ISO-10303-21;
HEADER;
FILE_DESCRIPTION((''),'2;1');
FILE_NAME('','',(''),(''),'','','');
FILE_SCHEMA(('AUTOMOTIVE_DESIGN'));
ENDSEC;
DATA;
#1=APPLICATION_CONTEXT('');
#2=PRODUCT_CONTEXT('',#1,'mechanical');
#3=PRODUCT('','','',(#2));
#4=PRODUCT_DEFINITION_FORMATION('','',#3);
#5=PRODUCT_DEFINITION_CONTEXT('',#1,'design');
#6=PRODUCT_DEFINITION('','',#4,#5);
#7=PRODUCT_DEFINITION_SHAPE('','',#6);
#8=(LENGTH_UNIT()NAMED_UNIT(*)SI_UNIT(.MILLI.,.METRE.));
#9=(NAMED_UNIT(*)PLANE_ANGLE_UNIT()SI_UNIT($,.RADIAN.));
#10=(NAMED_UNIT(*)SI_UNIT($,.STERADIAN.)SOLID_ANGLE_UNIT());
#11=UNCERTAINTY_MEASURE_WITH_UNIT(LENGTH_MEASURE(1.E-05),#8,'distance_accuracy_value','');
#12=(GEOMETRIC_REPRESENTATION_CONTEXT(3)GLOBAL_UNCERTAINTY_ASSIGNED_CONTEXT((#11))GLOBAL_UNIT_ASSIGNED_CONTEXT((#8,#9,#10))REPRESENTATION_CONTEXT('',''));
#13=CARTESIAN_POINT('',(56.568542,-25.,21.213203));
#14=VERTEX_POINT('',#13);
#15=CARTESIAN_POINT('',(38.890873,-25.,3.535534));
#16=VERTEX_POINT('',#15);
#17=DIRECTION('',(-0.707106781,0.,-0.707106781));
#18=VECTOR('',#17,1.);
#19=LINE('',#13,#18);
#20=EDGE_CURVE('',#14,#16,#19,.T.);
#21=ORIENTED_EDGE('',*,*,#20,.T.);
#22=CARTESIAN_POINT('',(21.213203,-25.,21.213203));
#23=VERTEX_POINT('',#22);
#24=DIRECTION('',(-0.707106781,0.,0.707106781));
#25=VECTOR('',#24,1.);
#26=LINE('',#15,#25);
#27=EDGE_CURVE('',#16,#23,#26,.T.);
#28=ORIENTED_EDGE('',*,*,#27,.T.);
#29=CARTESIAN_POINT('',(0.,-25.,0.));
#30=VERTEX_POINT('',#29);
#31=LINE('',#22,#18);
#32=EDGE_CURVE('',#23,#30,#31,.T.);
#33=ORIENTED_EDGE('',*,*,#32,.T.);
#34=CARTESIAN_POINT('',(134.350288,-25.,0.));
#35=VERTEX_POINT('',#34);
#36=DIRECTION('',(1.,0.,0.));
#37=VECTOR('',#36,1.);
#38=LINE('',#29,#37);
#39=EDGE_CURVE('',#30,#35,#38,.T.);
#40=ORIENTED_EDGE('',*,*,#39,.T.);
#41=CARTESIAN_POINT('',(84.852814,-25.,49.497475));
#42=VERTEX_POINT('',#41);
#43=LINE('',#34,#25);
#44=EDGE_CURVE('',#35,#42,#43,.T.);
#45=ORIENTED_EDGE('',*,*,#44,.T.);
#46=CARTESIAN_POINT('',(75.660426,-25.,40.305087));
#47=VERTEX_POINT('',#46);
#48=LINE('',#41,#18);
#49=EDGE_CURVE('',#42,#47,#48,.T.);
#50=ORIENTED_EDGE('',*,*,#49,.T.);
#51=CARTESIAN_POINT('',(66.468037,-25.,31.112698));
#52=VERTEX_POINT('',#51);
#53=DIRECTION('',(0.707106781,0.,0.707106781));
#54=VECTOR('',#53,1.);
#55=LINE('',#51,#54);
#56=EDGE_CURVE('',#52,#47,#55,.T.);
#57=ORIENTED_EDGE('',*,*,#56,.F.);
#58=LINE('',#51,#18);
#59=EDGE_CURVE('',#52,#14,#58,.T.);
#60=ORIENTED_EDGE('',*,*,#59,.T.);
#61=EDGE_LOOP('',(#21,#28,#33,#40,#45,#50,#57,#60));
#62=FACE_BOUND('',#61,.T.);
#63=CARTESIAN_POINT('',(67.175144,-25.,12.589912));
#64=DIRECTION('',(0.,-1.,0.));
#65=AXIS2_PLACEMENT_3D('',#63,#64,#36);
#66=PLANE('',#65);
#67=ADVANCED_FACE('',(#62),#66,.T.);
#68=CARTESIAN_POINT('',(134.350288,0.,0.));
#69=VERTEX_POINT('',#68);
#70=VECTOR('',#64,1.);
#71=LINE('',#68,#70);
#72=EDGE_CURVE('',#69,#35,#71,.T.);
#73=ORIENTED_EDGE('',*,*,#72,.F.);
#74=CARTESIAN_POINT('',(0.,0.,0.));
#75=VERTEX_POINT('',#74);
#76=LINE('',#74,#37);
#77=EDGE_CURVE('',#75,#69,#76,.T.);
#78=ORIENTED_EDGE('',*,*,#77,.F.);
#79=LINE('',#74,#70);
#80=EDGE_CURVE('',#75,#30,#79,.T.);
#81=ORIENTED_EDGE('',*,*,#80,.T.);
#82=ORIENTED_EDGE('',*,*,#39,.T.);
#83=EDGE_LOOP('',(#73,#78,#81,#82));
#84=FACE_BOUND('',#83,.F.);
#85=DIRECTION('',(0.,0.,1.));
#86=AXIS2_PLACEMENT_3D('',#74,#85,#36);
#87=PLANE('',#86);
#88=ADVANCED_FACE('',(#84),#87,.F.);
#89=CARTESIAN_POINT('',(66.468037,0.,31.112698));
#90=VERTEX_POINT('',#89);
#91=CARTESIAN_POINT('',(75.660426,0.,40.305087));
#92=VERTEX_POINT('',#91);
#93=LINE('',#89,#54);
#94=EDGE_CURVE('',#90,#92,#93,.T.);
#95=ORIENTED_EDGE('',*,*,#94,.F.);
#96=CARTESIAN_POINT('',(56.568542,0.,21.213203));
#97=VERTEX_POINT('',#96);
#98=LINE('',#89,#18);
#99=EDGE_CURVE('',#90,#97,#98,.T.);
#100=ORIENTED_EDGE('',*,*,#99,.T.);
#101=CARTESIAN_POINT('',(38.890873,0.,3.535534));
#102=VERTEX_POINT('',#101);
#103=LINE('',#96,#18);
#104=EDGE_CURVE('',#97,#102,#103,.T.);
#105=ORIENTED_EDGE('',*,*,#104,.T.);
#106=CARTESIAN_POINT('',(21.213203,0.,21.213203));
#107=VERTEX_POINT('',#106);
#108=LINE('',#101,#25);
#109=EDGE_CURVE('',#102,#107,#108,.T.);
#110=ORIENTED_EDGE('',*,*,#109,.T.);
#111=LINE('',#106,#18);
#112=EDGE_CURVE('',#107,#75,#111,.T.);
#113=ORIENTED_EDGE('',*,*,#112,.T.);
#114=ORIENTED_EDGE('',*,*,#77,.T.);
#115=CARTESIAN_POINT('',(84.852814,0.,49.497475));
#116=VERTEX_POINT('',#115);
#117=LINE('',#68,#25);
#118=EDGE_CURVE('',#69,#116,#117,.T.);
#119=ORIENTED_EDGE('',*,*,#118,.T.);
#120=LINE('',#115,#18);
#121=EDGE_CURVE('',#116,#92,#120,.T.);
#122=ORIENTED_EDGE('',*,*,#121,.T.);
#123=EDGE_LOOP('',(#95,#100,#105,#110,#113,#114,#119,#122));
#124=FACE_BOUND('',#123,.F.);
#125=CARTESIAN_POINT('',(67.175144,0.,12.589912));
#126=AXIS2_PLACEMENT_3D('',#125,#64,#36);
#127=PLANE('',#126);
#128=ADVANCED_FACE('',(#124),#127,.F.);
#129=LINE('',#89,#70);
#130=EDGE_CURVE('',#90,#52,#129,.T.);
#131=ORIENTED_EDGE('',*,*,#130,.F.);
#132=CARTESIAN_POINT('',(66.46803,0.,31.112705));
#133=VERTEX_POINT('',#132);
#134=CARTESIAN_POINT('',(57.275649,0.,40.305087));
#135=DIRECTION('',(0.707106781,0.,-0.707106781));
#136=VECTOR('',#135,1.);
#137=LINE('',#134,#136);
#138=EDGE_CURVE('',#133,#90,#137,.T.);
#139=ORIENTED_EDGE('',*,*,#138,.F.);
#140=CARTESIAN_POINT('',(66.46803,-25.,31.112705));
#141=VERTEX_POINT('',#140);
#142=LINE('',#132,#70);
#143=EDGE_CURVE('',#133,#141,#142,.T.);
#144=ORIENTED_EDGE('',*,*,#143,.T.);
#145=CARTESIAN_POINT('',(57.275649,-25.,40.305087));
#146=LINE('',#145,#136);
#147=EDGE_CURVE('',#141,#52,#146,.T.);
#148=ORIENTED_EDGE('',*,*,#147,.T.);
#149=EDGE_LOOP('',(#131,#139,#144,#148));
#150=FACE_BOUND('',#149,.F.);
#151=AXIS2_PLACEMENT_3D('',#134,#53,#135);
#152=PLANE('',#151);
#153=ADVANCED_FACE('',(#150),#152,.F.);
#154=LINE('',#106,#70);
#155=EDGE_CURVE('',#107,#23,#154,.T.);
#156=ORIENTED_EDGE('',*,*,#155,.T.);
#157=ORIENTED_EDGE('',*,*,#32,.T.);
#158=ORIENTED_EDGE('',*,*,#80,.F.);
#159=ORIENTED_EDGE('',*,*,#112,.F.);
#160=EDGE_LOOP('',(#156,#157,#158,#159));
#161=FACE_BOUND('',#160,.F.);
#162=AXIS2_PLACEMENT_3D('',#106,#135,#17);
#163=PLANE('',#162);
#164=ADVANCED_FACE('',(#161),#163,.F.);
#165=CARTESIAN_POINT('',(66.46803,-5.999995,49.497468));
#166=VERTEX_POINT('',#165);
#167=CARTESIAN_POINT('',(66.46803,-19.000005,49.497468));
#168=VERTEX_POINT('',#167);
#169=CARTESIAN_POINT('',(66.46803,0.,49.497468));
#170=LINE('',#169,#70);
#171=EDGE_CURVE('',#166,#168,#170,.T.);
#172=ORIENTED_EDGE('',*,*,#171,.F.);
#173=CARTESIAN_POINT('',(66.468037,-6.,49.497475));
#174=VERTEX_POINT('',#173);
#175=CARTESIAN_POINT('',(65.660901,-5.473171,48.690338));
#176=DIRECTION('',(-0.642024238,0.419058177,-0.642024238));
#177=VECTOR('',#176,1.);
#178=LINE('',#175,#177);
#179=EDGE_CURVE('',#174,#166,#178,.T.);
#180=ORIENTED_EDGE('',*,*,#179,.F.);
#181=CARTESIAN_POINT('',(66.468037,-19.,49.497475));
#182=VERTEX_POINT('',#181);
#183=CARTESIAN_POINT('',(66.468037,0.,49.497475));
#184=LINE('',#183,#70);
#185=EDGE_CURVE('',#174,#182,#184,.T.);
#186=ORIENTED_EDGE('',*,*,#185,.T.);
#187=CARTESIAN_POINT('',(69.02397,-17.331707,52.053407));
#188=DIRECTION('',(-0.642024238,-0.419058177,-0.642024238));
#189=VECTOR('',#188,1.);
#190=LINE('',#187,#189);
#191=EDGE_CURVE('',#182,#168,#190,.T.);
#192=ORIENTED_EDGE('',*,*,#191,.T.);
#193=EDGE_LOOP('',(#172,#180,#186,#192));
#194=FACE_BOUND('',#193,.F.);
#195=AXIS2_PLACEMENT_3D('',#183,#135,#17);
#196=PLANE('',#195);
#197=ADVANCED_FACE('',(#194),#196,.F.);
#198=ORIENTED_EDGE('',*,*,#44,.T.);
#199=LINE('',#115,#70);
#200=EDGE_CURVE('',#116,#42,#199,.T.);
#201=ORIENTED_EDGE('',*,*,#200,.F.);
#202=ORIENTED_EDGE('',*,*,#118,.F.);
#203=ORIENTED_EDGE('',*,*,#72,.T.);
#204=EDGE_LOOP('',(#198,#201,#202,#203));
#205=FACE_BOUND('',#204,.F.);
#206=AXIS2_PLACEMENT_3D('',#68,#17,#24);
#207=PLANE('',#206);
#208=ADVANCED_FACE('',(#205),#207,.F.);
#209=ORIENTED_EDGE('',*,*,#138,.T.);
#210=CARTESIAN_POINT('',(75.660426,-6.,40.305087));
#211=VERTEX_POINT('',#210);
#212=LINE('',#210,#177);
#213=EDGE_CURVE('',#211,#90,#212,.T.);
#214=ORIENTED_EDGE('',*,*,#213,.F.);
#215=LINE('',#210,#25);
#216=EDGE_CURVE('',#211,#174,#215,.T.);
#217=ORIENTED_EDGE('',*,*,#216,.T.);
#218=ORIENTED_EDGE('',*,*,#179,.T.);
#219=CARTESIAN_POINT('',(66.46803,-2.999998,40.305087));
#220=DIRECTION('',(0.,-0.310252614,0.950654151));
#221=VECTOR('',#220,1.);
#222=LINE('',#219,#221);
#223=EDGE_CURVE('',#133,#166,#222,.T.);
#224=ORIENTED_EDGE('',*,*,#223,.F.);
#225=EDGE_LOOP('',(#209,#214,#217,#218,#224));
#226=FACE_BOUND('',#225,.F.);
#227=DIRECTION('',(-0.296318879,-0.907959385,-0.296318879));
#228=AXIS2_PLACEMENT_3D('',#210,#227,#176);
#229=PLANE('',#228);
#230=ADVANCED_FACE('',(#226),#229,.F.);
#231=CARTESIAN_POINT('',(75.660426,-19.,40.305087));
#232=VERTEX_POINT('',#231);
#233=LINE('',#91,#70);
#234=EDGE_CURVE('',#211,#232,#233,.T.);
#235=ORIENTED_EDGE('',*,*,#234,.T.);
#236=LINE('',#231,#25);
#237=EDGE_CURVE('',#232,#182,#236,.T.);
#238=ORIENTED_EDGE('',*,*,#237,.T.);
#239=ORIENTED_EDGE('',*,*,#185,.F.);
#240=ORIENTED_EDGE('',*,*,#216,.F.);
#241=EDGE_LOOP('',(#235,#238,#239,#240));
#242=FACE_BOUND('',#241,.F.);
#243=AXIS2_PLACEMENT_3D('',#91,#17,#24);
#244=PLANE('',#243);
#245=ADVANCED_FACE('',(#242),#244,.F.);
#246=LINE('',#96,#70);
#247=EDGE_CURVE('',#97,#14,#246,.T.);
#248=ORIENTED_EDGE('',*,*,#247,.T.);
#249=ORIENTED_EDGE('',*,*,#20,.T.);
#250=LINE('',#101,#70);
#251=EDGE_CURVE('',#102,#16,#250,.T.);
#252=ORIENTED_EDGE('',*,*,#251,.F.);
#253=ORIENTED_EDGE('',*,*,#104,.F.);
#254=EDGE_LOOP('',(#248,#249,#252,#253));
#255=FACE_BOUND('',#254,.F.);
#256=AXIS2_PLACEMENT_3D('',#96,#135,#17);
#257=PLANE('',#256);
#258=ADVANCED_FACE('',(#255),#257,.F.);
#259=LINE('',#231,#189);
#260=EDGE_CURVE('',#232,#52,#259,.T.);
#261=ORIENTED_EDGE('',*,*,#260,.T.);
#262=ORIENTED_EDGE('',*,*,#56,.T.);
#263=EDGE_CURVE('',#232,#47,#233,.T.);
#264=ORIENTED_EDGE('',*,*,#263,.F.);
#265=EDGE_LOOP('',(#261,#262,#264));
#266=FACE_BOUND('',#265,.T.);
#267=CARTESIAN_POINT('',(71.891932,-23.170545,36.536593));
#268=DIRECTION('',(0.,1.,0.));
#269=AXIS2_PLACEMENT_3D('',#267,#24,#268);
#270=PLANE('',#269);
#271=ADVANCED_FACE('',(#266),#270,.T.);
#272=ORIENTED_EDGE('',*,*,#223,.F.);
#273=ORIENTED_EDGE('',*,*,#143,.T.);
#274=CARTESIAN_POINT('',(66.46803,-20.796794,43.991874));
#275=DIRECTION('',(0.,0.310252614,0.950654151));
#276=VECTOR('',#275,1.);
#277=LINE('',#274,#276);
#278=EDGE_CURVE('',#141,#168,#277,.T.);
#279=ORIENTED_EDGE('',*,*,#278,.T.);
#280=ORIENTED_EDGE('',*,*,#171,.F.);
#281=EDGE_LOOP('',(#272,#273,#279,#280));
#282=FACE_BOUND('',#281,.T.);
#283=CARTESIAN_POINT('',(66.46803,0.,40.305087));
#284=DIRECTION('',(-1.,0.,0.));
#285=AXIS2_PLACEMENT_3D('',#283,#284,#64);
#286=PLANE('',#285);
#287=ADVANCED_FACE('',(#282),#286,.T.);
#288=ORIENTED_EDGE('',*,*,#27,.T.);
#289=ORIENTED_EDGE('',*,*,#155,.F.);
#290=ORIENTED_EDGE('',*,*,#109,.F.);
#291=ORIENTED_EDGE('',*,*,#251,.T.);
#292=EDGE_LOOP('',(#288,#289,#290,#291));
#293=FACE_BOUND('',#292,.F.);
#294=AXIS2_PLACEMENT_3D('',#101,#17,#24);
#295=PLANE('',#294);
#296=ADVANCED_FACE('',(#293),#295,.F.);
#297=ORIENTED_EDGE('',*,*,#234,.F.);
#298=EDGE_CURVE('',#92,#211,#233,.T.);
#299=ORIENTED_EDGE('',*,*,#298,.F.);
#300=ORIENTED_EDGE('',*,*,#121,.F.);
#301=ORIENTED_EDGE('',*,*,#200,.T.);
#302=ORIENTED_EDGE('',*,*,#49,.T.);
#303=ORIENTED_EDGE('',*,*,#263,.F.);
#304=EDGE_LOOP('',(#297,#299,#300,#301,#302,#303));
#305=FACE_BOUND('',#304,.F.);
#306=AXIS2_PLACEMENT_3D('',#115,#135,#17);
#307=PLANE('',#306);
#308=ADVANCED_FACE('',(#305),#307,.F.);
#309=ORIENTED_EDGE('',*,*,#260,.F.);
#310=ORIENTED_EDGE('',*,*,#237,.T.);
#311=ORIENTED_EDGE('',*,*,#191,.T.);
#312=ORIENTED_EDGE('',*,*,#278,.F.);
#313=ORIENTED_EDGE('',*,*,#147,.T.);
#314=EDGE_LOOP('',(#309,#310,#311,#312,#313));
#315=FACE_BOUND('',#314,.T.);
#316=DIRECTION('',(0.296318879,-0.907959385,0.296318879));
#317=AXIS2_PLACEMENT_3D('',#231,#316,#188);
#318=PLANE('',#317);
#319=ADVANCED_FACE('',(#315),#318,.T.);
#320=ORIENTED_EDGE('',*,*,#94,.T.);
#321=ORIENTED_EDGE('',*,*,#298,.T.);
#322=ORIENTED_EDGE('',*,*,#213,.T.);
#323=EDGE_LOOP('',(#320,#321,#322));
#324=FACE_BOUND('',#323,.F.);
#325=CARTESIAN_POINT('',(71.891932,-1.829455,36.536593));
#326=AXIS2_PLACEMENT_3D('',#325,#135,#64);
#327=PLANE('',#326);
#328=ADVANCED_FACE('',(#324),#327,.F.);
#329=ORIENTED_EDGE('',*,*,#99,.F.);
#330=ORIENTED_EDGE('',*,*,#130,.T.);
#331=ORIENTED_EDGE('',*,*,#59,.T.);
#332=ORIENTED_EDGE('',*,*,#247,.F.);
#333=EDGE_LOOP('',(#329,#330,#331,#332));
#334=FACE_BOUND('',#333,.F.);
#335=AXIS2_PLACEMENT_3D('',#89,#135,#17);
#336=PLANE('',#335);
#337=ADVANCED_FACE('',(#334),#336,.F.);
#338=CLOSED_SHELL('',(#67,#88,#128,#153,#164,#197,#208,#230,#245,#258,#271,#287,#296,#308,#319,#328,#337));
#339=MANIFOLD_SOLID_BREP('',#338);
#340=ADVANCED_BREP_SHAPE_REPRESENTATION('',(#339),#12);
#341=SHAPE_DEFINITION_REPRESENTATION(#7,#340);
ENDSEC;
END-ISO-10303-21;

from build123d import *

# Parameters (mm, degrees)
F1_DEPTH    = 25
F2_T1_DEPTH = 46.6847527524
F3_SIZE     = 12.99999


# Not quite as in the source:
# - a fillet or chamfer that OpenCascade refuses, or shapes differently, is made with other operations: its cross-section is extruded or revolved along the edge and cut away or added
# - a fillet or chamfer is up to 0.001 mm smaller than in the source, because OpenCascade refuses the exact size


with BuildPart() as f1:
    # F0 (on Front) → F1 (new body)
    with BuildSketch(Plane.XZ):
        Polygon((21.2132034356, 21.2132034356), (0, 0), (134.3502884254, 0), (84.8528137424, 49.4974746831), (75.660425587, 40.3050865276), (66.4680374315, 31.1126983722), (56.5685424949, 21.2132034356), (38.8908729653, 3.5355339059), align=None)
        Polygon((66.4680374315, 31.1126983722), (75.660425587, 40.3050865276), (66.4680374315, 49.4974746831), (57.2756492761, 40.3050865276), align=None)
    extrude(amount=F1_DEPTH)

    # F2: chamfer of 6 x 13 on 2 edges, made by hand

    # F2_s2 → F2_t1 (cut)
    with BuildSketch(Plane(origin=(17.6776695297, 0, -17.6776695297), x_dir=(0, 1, 0), z_dir=(-0.7071067812, 0, 0.7071067812))):
        Polygon((-19, -82), (-25, -69), (-25, -82), align=None)
        Polygon((-6, -82), (0, -69), (0, -82), align=None)
    extrude(amount=F2_T1_DEPTH, mode=Mode.SUBTRACT)

    # F3 (size 13 in the source; OpenCascade refuses exactly that, so slightly less here)
    f3_edges = [f1.edges().sort_by_distance(p)[0] for p in [
        (57.275649, -12.5, 40.305087),
    ]]
    chamfer(f3_edges, length=F3_SIZE)


solid = f1.part
